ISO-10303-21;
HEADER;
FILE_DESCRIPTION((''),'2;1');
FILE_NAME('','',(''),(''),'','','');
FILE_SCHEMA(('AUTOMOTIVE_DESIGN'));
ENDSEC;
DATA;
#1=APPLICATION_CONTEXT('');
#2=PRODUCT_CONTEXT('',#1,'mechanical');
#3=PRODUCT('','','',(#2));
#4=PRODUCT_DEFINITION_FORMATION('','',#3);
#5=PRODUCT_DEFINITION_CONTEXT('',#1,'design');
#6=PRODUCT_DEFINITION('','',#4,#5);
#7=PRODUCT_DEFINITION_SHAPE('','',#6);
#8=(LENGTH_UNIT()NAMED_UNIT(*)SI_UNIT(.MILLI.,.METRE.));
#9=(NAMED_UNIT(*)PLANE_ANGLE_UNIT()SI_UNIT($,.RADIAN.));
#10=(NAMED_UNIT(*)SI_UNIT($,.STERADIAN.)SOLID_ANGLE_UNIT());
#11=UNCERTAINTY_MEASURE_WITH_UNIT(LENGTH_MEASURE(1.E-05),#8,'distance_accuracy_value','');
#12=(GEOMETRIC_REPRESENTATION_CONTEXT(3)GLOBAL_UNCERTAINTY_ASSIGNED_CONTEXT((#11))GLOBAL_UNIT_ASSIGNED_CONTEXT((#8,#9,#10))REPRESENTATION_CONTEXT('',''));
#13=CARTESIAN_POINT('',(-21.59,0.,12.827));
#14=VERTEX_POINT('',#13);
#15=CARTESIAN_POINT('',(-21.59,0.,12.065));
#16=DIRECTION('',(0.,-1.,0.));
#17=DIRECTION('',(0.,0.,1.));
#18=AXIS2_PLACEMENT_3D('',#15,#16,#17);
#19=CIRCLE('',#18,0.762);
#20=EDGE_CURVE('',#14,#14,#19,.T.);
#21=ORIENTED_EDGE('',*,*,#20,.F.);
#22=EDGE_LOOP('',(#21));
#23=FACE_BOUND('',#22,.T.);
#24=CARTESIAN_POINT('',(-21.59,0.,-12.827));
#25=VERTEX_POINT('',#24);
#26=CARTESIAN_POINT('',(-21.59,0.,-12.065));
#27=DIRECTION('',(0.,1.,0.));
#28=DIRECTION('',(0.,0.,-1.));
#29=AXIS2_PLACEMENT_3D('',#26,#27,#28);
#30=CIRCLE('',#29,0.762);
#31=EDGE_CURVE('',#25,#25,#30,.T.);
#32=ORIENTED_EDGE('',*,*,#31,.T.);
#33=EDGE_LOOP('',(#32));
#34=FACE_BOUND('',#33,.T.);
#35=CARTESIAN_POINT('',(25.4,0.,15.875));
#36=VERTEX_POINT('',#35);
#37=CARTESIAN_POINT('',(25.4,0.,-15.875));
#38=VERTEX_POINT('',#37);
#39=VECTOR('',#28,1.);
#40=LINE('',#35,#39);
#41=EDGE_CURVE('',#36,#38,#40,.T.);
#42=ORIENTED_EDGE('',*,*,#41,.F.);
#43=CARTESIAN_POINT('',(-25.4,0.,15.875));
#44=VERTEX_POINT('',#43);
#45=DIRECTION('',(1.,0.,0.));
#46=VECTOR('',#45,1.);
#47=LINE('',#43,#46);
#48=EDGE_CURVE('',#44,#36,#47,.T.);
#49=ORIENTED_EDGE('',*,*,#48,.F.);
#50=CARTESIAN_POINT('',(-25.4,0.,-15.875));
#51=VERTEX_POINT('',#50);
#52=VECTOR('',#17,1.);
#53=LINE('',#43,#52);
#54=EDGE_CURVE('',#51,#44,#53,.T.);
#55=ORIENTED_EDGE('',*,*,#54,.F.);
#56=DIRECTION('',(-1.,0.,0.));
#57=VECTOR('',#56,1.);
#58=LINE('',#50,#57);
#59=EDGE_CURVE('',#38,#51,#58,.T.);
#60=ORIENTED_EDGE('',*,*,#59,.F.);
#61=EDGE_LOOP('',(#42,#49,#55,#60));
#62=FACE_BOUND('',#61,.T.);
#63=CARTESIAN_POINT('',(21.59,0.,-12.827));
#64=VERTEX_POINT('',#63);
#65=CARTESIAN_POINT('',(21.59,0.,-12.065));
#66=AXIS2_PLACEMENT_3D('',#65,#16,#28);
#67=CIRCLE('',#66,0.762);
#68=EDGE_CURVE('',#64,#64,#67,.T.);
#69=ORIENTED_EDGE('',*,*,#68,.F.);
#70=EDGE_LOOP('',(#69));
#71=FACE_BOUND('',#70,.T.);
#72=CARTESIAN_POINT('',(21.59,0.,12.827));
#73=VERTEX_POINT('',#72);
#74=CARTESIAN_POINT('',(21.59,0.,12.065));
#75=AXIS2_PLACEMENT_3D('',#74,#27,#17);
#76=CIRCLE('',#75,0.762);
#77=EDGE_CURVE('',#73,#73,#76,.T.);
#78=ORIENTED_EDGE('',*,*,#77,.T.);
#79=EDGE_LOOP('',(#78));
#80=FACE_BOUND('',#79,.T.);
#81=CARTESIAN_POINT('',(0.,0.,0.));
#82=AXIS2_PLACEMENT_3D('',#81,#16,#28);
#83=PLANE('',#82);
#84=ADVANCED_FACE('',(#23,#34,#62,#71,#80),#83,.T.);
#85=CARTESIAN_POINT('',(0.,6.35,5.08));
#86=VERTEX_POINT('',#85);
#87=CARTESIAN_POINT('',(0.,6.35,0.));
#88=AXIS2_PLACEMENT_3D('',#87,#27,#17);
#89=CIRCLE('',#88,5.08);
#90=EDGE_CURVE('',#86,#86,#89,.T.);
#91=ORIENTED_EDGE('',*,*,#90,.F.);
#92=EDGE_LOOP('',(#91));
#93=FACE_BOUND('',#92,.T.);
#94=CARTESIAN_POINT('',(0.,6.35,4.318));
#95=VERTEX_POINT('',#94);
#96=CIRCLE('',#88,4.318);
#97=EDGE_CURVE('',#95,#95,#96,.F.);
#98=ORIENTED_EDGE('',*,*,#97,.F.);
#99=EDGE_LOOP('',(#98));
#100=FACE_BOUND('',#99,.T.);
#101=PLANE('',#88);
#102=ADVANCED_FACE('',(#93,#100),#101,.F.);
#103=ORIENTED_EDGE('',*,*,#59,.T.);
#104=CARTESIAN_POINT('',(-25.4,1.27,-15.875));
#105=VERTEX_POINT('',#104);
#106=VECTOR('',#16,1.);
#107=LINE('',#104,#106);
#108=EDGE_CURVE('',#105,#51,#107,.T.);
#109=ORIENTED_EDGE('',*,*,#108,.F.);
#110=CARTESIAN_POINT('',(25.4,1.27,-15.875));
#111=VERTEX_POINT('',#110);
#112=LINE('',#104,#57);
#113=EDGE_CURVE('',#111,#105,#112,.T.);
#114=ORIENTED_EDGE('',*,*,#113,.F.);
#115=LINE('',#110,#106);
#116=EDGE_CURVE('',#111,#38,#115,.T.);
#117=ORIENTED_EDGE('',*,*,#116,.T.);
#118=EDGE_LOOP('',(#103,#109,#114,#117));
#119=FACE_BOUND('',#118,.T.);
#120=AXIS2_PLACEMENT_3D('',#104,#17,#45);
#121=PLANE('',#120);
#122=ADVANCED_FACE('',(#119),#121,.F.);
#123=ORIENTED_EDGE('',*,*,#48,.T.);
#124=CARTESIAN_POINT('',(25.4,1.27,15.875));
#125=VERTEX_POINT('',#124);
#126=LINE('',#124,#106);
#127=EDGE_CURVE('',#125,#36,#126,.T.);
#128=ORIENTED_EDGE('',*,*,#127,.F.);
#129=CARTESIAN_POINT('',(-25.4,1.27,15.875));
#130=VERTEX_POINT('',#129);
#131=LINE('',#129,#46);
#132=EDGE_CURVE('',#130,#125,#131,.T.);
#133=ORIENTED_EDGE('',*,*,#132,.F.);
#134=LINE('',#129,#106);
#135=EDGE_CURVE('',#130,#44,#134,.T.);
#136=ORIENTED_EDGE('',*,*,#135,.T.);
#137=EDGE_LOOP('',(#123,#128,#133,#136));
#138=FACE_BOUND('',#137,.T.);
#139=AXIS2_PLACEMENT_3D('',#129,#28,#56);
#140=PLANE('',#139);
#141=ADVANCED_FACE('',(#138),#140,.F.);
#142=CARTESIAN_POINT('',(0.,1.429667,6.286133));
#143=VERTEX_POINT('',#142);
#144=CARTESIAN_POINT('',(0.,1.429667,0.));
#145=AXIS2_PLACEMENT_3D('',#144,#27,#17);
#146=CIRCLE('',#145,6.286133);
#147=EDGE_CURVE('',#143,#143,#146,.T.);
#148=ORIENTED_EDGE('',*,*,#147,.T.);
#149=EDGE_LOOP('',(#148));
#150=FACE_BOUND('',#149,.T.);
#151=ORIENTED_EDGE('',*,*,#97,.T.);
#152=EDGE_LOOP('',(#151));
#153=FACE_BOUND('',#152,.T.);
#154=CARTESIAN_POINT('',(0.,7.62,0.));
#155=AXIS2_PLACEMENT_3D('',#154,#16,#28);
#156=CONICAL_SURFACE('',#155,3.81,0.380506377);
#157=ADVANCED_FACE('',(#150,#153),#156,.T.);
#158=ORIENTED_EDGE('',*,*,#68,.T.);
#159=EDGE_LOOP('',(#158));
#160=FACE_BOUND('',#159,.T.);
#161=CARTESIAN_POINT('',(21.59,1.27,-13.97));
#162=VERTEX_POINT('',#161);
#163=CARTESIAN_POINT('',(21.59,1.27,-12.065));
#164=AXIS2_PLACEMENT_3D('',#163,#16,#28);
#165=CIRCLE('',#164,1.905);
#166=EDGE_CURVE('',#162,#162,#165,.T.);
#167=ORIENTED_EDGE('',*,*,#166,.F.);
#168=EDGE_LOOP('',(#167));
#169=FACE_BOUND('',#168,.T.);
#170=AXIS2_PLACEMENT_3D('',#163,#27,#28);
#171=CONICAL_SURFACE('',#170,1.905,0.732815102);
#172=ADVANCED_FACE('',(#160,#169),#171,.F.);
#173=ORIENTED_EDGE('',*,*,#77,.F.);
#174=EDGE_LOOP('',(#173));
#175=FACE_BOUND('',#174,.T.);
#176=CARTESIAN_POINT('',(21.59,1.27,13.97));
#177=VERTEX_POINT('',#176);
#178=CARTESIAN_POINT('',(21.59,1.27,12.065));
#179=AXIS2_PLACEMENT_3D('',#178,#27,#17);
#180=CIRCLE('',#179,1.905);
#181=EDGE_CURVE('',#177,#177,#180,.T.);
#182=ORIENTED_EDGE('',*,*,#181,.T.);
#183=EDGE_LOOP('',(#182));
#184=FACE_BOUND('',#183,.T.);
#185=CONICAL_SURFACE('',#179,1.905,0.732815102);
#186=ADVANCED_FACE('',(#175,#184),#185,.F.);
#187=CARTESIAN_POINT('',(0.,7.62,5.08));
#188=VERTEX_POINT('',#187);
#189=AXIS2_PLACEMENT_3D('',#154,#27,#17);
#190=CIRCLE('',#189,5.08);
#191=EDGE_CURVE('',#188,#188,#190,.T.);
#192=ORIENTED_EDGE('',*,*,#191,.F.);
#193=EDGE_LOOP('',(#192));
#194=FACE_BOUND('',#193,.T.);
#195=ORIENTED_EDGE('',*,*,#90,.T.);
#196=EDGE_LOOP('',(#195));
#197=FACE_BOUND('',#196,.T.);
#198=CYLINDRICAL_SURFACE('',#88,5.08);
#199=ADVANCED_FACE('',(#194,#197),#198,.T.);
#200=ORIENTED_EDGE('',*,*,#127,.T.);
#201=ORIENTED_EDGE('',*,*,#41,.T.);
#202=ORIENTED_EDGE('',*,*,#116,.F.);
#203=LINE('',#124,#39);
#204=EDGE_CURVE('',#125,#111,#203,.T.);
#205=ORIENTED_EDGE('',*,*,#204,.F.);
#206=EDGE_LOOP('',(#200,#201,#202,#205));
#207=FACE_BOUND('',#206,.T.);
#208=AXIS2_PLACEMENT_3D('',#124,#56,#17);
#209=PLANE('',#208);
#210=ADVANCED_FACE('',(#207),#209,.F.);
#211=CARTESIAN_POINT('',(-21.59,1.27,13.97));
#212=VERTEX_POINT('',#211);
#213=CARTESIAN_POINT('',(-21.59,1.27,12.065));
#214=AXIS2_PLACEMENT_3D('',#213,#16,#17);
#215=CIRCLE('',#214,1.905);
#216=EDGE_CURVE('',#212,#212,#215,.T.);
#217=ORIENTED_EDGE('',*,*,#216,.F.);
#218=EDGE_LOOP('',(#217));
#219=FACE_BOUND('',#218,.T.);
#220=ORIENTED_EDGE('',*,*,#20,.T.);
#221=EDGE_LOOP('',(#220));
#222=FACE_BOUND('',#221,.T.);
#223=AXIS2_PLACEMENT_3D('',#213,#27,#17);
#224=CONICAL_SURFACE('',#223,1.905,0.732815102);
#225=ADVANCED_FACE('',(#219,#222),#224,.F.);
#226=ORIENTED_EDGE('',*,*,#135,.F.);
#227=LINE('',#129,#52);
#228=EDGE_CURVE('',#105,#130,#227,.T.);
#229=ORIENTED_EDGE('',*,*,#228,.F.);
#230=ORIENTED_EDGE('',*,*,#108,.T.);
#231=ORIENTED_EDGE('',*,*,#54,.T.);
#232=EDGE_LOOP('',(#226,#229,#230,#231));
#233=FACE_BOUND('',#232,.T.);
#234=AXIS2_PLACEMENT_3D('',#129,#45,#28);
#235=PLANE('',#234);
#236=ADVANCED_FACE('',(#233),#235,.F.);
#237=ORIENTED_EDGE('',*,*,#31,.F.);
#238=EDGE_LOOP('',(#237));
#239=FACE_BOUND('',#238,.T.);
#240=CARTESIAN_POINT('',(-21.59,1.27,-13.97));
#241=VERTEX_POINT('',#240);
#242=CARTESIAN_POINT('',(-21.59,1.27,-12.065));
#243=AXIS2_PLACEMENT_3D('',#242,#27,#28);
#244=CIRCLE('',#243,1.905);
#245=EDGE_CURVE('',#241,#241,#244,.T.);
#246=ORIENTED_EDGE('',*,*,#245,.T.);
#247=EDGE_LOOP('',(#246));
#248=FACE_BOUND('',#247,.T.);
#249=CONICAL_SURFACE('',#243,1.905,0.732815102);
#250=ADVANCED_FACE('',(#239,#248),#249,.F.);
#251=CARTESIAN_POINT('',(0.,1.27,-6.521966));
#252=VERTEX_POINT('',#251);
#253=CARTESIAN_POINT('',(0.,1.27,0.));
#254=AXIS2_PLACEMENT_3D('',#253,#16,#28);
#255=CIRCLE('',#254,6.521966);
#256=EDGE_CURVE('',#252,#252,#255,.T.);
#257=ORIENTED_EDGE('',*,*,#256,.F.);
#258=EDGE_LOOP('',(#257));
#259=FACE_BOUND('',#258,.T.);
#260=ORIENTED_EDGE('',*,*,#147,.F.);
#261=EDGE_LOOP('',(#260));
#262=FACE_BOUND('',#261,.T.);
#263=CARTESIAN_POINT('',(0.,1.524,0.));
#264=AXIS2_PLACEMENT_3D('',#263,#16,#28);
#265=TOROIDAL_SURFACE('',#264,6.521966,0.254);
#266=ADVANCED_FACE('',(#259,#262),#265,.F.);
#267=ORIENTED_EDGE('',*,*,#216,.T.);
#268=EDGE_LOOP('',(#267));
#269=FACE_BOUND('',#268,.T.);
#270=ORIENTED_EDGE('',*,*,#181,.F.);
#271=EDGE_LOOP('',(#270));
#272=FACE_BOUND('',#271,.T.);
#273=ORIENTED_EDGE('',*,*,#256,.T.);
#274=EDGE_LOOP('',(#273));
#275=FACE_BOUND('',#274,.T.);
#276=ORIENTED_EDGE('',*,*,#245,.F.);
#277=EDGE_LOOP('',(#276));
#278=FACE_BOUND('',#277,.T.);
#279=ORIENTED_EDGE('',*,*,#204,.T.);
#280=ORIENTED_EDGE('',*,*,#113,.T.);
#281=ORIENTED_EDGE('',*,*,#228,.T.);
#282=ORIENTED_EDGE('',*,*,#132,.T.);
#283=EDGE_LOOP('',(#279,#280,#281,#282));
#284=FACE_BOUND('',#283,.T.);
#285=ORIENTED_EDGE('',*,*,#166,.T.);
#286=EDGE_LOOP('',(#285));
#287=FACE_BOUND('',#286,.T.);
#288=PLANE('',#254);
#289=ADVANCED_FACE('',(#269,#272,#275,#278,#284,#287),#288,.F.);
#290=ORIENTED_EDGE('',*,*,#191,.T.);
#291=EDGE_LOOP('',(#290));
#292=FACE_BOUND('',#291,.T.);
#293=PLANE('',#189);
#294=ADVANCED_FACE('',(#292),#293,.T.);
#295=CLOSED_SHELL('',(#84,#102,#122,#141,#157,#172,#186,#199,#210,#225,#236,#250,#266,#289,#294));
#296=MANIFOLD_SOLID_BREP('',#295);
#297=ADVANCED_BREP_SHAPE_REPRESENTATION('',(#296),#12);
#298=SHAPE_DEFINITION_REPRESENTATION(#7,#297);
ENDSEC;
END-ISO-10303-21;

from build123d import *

# Parameters (mm, degrees)
SKETCH1_W                = 50.8
SKETCH1_H                = 31.75
BOSS_EXTRUDE1_DEPTH      = 1.27
BOSS_EXTRUDE2_DEPTH      = 6.35
BOSS_EXTRUDE2_DEPTH_BACK = 1.27
SKETCH2_R                = 6.35
CHAMFER1_SIZE            = 6.35
CHAMFER1_SIZE_2          = 2.54
FILLET1_R                = 0.254
SKETCH7_R                = 5.08
BOSS_EXTRUDE3_DEPTH      = 1.27


with BuildPart() as part:
    # Sketch1 → Boss-Extrude1 (new body)
    with BuildSketch(Plane(origin=(0, 0, 0), x_dir=(1, 0, 0), z_dir=(0, 1, 0))):
        Rectangle(SKETCH1_W, SKETCH1_H)
    extrude(amount=BOSS_EXTRUDE1_DEPTH)

    # Sketch2 → Boss-Extrude2 (add, two sides: drawn at the far end of the back side and taken through both)
    with BuildSketch(Plane(origin=(0, 1.27, 0), x_dir=(1, 0, 0), z_dir=(0, 1, 0)).offset(-BOSS_EXTRUDE2_DEPTH_BACK)):
        with Locations(Location((0, 0, 0), (0, 0, 270))):
            Circle(SKETCH2_R)
    extrude(amount=BOSS_EXTRUDE2_DEPTH + BOSS_EXTRUDE2_DEPTH_BACK)

    # Chamfer1
    # the kernel refuses this chamfer: 6.35, 2.54 mm, written as the material it takes off along each edge
    with BuildSketch(Plane(origin=(0, 7.62, 0), x_dir=(0, 0, 1), z_dir=(-1, 0, 0))) as chamfer1_piece_1_section:
        Polygon((6.35, -CHAMFER1_SIZE), (6.35 - CHAMFER1_SIZE_2, 0), (6.35, 0), align=None)
    chamfer1_piece_1 = revolve(axis=Axis((0, 7.62, 0), (0, 1, 0)), mode=Mode.PRIVATE)
    chamfer1_piece_1 = split(chamfer1_piece_1, bisect_by=Plane(origin=(0, 1.27, -5.09685111), z_dir=(0, 1, 0)), keep=Keep.TOP, mode=Mode.PRIVATE)
    add(chamfer1_piece_1, mode=Mode.SUBTRACT)

    # Fillet1
    fillet1_edges = [part.edges().sort_by_distance(p)[0] for p in [
        (0, 1.27, -6.35),
    ]]
    fillet(fillet1_edges, radius=FILLET1_R)

    # Sketch6 → Cut-Revolve1 (revolve, cut)
    with BuildSketch(Plane.XY.offset(12.065), mode=Mode.PRIVATE) as cut_revolve1_sk:
        Polygon((21.59, 1.27), (21.59, 0), (20.828, 0), (19.685, 1.27), align=None)
    cut_revolve1 = revolve(cut_revolve1_sk.sketch.rotate(Axis((21.59, 1.27, 12.065), (0, -1, 0)), 270), axis=Axis((21.59, 1.27, 12.065), (0, -1, 0)), mode=Mode.SUBTRACT)

    # Mirror1: Cut-Revolve1 across plane
    add(cut_revolve1.mirror(Plane.XY), mode=Mode.SUBTRACT)

    # Mirror2: Cut-Revolve1 across plane
    add(cut_revolve1.mirror(Plane(origin=(0, 0, 0), x_dir=(0, 0, 1), z_dir=(1, 0, 0))), mode=Mode.SUBTRACT)

    # Mirror2 copy 1 sketch → Mirror2 copy 1 (revolve, cut)
    with BuildSketch(Plane(origin=(0, 0, -12.065), x_dir=(-1, 0, 0), z_dir=(0, 0, -1))):
        Polygon((21.59, 1.27), (21.59, 0), (20.828, 0), (19.685, 1.27), align=None)
    revolve(axis=Axis((-21.59, 1.27, -12.065), (0, -1, 0)), mode=Mode.SUBTRACT)

    # Sketch7 → Boss-Extrude3 (add)
    with BuildSketch(Plane(origin=(0, 7.62, 0), x_dir=(1, 0, 0), z_dir=(0, 1, 0))):
        with Locations(Location((0, 0, 0), (0, 0, 270))):
            Circle(SKETCH7_R)
    extrude(amount=-BOSS_EXTRUDE3_DEPTH)


solid = part.part
